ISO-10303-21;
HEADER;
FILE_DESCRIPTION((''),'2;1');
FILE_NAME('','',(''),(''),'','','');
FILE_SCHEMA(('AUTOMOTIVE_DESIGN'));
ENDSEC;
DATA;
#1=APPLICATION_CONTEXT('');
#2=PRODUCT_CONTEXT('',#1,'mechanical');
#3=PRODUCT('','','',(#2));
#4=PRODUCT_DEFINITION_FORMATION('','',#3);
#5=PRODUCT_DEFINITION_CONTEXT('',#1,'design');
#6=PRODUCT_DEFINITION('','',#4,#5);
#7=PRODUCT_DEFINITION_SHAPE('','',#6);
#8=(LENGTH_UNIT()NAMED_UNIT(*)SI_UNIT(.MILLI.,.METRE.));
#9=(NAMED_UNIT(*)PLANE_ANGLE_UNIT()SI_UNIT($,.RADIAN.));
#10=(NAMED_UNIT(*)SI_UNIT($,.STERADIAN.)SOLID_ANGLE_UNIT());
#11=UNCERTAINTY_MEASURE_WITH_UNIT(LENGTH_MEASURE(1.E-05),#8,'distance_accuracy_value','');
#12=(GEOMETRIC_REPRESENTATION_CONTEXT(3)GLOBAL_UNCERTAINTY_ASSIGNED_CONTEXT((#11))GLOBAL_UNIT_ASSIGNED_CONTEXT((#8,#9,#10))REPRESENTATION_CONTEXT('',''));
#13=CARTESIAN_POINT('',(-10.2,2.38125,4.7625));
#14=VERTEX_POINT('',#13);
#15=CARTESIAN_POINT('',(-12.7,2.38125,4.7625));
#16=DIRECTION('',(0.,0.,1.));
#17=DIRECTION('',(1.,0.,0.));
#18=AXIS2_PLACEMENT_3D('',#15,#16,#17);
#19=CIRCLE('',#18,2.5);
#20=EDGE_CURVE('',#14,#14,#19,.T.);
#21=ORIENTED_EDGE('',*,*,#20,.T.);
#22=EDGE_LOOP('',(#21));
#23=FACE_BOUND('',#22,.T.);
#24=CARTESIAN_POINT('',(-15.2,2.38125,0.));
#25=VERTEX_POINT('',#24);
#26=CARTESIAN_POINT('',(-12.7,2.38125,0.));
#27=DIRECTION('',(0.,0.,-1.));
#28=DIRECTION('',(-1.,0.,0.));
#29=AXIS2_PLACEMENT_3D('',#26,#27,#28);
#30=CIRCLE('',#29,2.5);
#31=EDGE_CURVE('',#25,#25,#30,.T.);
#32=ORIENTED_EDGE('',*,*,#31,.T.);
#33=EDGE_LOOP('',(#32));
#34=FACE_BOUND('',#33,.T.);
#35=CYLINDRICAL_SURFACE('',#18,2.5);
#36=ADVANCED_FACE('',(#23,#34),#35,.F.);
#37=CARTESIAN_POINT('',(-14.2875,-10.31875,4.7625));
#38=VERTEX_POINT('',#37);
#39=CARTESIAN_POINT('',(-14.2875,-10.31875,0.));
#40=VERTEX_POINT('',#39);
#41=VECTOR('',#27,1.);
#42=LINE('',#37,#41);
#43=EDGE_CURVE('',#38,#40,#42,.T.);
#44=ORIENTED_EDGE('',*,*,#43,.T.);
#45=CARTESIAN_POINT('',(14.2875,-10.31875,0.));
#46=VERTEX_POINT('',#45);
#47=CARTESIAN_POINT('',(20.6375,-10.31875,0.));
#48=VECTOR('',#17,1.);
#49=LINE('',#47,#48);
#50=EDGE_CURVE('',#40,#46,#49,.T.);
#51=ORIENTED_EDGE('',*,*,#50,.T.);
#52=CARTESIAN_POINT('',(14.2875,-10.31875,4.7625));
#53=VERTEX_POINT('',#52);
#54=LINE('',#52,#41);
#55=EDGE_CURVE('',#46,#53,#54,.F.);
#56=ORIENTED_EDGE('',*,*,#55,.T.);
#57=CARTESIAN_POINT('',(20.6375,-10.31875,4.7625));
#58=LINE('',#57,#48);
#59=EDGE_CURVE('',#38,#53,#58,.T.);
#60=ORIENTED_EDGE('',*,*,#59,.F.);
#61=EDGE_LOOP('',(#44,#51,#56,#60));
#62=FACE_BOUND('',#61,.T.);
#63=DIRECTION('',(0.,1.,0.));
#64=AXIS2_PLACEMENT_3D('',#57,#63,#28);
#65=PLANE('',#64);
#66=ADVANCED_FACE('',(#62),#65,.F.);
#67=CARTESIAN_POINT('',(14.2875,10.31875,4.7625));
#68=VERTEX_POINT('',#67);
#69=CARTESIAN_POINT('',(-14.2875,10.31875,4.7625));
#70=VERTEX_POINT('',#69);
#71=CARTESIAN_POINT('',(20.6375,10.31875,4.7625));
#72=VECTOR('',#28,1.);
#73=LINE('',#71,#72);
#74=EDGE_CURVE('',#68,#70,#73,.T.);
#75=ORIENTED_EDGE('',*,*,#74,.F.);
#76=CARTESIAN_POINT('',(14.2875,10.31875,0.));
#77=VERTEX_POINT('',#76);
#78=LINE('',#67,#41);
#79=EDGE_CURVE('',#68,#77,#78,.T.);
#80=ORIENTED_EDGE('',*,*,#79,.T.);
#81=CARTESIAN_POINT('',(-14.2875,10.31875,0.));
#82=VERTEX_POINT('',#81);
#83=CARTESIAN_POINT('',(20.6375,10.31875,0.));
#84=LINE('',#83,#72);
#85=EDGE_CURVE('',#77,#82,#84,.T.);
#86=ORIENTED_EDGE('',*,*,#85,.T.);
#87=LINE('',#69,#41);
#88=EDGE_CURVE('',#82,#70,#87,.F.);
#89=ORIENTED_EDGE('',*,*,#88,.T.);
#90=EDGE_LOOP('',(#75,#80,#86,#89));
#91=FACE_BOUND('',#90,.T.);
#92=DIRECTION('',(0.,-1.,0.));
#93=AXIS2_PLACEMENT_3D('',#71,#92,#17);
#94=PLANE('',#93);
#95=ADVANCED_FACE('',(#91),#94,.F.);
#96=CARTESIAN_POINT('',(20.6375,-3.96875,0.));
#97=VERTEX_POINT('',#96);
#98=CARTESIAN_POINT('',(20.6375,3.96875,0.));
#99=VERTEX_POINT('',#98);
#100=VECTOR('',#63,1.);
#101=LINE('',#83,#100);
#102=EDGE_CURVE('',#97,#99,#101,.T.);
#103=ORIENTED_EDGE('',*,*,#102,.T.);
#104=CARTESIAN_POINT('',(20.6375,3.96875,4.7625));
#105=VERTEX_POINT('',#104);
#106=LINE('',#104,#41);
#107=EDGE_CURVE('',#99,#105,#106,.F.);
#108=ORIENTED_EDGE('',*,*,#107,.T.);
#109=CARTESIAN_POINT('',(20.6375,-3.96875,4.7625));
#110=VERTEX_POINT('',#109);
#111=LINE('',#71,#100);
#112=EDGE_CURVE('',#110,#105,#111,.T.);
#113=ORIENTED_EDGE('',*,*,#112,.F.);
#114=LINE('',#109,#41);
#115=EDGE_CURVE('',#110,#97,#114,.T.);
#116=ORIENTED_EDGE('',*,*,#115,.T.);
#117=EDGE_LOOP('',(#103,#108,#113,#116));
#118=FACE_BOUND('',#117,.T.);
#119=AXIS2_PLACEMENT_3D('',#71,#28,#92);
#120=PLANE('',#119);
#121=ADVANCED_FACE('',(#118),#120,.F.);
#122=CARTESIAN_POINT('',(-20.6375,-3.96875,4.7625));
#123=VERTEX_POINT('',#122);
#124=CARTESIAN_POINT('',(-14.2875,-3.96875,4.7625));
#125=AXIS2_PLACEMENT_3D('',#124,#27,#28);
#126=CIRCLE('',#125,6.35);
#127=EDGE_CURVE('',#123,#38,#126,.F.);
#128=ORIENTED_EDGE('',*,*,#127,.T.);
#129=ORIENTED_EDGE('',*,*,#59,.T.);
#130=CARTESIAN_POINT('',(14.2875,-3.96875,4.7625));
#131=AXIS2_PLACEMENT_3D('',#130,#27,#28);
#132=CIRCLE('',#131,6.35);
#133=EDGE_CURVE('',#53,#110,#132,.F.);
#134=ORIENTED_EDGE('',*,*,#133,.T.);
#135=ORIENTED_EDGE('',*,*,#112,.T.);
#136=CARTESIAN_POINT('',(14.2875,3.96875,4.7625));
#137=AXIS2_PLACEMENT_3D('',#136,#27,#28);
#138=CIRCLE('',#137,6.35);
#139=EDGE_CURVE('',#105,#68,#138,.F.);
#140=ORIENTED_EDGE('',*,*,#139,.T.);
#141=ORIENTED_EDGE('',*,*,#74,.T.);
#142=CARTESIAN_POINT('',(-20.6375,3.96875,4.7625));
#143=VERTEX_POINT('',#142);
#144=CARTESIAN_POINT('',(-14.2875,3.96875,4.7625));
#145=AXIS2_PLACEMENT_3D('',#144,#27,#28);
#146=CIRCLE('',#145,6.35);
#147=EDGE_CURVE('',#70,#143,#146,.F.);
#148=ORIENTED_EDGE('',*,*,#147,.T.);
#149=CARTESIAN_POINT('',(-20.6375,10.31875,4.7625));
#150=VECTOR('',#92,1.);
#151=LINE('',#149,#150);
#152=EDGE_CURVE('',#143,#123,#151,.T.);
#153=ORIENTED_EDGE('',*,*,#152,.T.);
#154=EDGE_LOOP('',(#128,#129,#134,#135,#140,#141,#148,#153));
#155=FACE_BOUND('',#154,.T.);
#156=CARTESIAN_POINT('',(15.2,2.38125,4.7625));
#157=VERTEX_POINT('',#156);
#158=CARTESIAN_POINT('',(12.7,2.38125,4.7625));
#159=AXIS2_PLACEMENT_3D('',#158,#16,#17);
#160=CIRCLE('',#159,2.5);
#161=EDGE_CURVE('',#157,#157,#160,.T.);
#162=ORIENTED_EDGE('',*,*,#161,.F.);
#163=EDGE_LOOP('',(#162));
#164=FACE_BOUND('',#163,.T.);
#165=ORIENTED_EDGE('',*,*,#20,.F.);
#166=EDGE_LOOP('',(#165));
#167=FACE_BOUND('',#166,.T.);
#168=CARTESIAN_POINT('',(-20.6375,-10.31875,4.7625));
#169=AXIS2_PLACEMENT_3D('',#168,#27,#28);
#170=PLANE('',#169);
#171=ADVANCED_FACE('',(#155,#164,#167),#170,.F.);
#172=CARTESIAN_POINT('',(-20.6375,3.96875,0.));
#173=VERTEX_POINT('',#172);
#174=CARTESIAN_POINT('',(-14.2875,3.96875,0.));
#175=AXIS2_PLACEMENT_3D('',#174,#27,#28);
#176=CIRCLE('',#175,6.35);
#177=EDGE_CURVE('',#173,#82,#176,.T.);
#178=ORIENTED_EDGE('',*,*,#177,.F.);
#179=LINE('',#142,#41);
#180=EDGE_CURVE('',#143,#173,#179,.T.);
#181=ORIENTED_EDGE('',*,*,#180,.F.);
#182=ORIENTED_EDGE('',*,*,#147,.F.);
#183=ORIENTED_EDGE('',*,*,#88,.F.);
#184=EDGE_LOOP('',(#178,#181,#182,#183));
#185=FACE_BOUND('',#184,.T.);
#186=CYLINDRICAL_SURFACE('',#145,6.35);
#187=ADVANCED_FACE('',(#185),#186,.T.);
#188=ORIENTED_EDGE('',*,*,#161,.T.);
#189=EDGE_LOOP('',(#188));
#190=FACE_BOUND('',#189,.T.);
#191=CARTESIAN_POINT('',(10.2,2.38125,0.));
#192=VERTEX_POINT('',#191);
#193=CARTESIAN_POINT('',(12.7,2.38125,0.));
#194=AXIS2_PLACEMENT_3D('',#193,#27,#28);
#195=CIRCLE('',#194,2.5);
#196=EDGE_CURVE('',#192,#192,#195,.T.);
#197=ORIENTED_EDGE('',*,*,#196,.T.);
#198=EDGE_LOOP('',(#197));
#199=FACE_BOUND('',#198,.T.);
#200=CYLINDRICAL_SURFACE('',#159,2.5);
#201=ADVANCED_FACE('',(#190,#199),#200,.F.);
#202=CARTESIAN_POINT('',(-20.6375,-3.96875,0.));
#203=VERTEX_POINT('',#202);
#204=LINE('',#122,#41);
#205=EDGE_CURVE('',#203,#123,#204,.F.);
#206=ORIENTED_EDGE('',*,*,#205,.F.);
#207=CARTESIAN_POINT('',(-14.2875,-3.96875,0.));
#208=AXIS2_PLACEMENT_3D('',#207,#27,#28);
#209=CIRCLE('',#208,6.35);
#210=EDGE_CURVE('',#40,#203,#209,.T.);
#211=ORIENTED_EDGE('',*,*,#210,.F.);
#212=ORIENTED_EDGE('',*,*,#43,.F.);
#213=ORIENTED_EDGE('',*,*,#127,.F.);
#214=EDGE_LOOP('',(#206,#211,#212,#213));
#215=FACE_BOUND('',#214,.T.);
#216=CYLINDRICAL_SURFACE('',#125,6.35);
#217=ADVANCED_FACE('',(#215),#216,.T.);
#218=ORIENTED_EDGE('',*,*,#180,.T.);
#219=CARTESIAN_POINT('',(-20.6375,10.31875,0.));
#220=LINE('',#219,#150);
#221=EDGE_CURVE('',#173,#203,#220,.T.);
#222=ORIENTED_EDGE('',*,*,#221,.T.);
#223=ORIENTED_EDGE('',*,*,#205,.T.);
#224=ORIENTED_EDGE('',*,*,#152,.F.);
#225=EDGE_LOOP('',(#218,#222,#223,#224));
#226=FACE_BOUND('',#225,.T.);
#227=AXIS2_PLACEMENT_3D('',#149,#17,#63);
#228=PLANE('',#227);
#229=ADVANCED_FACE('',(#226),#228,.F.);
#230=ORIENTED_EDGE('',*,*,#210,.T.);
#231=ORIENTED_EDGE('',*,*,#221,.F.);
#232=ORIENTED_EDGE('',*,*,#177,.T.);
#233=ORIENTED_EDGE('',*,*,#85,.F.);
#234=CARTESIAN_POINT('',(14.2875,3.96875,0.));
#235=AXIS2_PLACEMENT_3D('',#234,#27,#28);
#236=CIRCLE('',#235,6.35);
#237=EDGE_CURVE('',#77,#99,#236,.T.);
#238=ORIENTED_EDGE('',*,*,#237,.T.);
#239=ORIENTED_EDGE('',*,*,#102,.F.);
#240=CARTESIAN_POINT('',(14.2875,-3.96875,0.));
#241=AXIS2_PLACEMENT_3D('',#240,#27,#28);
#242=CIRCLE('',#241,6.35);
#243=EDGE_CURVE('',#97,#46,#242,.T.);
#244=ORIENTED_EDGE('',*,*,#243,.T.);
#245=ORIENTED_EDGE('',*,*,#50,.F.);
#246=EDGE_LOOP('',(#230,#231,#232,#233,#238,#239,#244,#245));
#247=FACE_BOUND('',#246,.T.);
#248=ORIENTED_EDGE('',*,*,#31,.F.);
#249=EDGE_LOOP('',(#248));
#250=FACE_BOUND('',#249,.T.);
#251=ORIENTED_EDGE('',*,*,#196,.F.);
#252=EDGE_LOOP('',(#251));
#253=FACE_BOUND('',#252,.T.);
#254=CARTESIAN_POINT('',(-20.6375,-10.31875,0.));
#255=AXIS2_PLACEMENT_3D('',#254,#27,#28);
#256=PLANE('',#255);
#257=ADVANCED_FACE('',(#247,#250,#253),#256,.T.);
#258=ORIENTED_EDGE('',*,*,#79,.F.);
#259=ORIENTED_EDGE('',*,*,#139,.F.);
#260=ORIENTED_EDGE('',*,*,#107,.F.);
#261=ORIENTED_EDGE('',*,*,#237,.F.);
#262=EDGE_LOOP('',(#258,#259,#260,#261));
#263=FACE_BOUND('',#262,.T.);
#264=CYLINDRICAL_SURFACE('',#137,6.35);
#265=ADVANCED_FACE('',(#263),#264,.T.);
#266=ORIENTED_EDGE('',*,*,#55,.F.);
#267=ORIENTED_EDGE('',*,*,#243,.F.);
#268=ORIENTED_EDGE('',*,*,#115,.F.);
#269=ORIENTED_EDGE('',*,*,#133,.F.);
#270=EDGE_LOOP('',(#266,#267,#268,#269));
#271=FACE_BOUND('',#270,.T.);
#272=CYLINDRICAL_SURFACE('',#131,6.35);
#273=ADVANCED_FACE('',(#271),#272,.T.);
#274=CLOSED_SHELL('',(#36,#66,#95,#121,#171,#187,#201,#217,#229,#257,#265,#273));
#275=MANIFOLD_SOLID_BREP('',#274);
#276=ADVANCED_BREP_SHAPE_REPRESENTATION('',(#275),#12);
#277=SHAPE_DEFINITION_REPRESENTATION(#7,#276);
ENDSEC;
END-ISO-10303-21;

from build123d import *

# Parameters (mm, degrees)
SKETCH1_W             = 41.275
SKETCH1_H             = 20.6375
BASE_FLANGE1_DEPTH    = 4.7625
BREAK_CORNER1_DEPTH   = 4.7625
M6X1_0_TAPPED_HOLE1_D = 5


# Read off the part's stored shape, not the designer's step: Break-Corner1
# Sheet-metal steps are written as plain solids
with BuildPart() as part:
    # Sketch1 → Base-Flange1 (new body)
    with BuildSketch(Plane.XY):
        Rectangle(SKETCH1_W, SKETCH1_H)
    extrude(amount=BASE_FLANGE1_DEPTH)

    # Break-Corner1 outline → Break-Corner1 (cut)
    with BuildSketch(Plane.XY):
        with BuildLine():
            Line((-20.6375, 10.31875), (-20.6375, 3.96875))
            ThreePointArc((-20.6375, 3.96875), (-18.777628061, 8.458878061), (-14.2875, 10.31875))
            Line((-14.2875, 10.31875), (-20.6375, 10.31875))
        make_face()
        with BuildLine():
            ThreePointArc((-14.2875, -10.31875), (-18.777628061, -8.458878061), (-20.6375, -3.96875))
            Line((-20.6375, -3.96875), (-20.6375, -10.31875))
            Line((-20.6375, -10.31875), (-14.2875, -10.31875))
        make_face()
        with BuildLine():
            Line((20.6375, 10.31875), (14.2875, 10.31875))
            ThreePointArc((14.2875, 10.31875), (18.777628061, 8.458878061), (20.6375, 3.96875))
            Line((20.6375, 3.96875), (20.6375, 10.31875))
        make_face()
        with BuildLine():
            ThreePointArc((20.6375, -3.96875), (18.777628061, -8.458878061), (14.2875, -10.31875))
            Line((14.2875, -10.31875), (20.6375, -10.31875))
            Line((20.6375, -10.31875), (20.6375, -3.96875))
        make_face()
    extrude(amount=BREAK_CORNER1_DEPTH, mode=Mode.SUBTRACT)

    # M6x1.0 Tapped Hole1 (through all)
    with Locations(Plane.XY.offset(4.7625)):
        with Locations((-12.7, 2.38125), (12.7, 2.38125)):
            Hole(M6X1_0_TAPPED_HOLE1_D / 2)


solid = part.part
